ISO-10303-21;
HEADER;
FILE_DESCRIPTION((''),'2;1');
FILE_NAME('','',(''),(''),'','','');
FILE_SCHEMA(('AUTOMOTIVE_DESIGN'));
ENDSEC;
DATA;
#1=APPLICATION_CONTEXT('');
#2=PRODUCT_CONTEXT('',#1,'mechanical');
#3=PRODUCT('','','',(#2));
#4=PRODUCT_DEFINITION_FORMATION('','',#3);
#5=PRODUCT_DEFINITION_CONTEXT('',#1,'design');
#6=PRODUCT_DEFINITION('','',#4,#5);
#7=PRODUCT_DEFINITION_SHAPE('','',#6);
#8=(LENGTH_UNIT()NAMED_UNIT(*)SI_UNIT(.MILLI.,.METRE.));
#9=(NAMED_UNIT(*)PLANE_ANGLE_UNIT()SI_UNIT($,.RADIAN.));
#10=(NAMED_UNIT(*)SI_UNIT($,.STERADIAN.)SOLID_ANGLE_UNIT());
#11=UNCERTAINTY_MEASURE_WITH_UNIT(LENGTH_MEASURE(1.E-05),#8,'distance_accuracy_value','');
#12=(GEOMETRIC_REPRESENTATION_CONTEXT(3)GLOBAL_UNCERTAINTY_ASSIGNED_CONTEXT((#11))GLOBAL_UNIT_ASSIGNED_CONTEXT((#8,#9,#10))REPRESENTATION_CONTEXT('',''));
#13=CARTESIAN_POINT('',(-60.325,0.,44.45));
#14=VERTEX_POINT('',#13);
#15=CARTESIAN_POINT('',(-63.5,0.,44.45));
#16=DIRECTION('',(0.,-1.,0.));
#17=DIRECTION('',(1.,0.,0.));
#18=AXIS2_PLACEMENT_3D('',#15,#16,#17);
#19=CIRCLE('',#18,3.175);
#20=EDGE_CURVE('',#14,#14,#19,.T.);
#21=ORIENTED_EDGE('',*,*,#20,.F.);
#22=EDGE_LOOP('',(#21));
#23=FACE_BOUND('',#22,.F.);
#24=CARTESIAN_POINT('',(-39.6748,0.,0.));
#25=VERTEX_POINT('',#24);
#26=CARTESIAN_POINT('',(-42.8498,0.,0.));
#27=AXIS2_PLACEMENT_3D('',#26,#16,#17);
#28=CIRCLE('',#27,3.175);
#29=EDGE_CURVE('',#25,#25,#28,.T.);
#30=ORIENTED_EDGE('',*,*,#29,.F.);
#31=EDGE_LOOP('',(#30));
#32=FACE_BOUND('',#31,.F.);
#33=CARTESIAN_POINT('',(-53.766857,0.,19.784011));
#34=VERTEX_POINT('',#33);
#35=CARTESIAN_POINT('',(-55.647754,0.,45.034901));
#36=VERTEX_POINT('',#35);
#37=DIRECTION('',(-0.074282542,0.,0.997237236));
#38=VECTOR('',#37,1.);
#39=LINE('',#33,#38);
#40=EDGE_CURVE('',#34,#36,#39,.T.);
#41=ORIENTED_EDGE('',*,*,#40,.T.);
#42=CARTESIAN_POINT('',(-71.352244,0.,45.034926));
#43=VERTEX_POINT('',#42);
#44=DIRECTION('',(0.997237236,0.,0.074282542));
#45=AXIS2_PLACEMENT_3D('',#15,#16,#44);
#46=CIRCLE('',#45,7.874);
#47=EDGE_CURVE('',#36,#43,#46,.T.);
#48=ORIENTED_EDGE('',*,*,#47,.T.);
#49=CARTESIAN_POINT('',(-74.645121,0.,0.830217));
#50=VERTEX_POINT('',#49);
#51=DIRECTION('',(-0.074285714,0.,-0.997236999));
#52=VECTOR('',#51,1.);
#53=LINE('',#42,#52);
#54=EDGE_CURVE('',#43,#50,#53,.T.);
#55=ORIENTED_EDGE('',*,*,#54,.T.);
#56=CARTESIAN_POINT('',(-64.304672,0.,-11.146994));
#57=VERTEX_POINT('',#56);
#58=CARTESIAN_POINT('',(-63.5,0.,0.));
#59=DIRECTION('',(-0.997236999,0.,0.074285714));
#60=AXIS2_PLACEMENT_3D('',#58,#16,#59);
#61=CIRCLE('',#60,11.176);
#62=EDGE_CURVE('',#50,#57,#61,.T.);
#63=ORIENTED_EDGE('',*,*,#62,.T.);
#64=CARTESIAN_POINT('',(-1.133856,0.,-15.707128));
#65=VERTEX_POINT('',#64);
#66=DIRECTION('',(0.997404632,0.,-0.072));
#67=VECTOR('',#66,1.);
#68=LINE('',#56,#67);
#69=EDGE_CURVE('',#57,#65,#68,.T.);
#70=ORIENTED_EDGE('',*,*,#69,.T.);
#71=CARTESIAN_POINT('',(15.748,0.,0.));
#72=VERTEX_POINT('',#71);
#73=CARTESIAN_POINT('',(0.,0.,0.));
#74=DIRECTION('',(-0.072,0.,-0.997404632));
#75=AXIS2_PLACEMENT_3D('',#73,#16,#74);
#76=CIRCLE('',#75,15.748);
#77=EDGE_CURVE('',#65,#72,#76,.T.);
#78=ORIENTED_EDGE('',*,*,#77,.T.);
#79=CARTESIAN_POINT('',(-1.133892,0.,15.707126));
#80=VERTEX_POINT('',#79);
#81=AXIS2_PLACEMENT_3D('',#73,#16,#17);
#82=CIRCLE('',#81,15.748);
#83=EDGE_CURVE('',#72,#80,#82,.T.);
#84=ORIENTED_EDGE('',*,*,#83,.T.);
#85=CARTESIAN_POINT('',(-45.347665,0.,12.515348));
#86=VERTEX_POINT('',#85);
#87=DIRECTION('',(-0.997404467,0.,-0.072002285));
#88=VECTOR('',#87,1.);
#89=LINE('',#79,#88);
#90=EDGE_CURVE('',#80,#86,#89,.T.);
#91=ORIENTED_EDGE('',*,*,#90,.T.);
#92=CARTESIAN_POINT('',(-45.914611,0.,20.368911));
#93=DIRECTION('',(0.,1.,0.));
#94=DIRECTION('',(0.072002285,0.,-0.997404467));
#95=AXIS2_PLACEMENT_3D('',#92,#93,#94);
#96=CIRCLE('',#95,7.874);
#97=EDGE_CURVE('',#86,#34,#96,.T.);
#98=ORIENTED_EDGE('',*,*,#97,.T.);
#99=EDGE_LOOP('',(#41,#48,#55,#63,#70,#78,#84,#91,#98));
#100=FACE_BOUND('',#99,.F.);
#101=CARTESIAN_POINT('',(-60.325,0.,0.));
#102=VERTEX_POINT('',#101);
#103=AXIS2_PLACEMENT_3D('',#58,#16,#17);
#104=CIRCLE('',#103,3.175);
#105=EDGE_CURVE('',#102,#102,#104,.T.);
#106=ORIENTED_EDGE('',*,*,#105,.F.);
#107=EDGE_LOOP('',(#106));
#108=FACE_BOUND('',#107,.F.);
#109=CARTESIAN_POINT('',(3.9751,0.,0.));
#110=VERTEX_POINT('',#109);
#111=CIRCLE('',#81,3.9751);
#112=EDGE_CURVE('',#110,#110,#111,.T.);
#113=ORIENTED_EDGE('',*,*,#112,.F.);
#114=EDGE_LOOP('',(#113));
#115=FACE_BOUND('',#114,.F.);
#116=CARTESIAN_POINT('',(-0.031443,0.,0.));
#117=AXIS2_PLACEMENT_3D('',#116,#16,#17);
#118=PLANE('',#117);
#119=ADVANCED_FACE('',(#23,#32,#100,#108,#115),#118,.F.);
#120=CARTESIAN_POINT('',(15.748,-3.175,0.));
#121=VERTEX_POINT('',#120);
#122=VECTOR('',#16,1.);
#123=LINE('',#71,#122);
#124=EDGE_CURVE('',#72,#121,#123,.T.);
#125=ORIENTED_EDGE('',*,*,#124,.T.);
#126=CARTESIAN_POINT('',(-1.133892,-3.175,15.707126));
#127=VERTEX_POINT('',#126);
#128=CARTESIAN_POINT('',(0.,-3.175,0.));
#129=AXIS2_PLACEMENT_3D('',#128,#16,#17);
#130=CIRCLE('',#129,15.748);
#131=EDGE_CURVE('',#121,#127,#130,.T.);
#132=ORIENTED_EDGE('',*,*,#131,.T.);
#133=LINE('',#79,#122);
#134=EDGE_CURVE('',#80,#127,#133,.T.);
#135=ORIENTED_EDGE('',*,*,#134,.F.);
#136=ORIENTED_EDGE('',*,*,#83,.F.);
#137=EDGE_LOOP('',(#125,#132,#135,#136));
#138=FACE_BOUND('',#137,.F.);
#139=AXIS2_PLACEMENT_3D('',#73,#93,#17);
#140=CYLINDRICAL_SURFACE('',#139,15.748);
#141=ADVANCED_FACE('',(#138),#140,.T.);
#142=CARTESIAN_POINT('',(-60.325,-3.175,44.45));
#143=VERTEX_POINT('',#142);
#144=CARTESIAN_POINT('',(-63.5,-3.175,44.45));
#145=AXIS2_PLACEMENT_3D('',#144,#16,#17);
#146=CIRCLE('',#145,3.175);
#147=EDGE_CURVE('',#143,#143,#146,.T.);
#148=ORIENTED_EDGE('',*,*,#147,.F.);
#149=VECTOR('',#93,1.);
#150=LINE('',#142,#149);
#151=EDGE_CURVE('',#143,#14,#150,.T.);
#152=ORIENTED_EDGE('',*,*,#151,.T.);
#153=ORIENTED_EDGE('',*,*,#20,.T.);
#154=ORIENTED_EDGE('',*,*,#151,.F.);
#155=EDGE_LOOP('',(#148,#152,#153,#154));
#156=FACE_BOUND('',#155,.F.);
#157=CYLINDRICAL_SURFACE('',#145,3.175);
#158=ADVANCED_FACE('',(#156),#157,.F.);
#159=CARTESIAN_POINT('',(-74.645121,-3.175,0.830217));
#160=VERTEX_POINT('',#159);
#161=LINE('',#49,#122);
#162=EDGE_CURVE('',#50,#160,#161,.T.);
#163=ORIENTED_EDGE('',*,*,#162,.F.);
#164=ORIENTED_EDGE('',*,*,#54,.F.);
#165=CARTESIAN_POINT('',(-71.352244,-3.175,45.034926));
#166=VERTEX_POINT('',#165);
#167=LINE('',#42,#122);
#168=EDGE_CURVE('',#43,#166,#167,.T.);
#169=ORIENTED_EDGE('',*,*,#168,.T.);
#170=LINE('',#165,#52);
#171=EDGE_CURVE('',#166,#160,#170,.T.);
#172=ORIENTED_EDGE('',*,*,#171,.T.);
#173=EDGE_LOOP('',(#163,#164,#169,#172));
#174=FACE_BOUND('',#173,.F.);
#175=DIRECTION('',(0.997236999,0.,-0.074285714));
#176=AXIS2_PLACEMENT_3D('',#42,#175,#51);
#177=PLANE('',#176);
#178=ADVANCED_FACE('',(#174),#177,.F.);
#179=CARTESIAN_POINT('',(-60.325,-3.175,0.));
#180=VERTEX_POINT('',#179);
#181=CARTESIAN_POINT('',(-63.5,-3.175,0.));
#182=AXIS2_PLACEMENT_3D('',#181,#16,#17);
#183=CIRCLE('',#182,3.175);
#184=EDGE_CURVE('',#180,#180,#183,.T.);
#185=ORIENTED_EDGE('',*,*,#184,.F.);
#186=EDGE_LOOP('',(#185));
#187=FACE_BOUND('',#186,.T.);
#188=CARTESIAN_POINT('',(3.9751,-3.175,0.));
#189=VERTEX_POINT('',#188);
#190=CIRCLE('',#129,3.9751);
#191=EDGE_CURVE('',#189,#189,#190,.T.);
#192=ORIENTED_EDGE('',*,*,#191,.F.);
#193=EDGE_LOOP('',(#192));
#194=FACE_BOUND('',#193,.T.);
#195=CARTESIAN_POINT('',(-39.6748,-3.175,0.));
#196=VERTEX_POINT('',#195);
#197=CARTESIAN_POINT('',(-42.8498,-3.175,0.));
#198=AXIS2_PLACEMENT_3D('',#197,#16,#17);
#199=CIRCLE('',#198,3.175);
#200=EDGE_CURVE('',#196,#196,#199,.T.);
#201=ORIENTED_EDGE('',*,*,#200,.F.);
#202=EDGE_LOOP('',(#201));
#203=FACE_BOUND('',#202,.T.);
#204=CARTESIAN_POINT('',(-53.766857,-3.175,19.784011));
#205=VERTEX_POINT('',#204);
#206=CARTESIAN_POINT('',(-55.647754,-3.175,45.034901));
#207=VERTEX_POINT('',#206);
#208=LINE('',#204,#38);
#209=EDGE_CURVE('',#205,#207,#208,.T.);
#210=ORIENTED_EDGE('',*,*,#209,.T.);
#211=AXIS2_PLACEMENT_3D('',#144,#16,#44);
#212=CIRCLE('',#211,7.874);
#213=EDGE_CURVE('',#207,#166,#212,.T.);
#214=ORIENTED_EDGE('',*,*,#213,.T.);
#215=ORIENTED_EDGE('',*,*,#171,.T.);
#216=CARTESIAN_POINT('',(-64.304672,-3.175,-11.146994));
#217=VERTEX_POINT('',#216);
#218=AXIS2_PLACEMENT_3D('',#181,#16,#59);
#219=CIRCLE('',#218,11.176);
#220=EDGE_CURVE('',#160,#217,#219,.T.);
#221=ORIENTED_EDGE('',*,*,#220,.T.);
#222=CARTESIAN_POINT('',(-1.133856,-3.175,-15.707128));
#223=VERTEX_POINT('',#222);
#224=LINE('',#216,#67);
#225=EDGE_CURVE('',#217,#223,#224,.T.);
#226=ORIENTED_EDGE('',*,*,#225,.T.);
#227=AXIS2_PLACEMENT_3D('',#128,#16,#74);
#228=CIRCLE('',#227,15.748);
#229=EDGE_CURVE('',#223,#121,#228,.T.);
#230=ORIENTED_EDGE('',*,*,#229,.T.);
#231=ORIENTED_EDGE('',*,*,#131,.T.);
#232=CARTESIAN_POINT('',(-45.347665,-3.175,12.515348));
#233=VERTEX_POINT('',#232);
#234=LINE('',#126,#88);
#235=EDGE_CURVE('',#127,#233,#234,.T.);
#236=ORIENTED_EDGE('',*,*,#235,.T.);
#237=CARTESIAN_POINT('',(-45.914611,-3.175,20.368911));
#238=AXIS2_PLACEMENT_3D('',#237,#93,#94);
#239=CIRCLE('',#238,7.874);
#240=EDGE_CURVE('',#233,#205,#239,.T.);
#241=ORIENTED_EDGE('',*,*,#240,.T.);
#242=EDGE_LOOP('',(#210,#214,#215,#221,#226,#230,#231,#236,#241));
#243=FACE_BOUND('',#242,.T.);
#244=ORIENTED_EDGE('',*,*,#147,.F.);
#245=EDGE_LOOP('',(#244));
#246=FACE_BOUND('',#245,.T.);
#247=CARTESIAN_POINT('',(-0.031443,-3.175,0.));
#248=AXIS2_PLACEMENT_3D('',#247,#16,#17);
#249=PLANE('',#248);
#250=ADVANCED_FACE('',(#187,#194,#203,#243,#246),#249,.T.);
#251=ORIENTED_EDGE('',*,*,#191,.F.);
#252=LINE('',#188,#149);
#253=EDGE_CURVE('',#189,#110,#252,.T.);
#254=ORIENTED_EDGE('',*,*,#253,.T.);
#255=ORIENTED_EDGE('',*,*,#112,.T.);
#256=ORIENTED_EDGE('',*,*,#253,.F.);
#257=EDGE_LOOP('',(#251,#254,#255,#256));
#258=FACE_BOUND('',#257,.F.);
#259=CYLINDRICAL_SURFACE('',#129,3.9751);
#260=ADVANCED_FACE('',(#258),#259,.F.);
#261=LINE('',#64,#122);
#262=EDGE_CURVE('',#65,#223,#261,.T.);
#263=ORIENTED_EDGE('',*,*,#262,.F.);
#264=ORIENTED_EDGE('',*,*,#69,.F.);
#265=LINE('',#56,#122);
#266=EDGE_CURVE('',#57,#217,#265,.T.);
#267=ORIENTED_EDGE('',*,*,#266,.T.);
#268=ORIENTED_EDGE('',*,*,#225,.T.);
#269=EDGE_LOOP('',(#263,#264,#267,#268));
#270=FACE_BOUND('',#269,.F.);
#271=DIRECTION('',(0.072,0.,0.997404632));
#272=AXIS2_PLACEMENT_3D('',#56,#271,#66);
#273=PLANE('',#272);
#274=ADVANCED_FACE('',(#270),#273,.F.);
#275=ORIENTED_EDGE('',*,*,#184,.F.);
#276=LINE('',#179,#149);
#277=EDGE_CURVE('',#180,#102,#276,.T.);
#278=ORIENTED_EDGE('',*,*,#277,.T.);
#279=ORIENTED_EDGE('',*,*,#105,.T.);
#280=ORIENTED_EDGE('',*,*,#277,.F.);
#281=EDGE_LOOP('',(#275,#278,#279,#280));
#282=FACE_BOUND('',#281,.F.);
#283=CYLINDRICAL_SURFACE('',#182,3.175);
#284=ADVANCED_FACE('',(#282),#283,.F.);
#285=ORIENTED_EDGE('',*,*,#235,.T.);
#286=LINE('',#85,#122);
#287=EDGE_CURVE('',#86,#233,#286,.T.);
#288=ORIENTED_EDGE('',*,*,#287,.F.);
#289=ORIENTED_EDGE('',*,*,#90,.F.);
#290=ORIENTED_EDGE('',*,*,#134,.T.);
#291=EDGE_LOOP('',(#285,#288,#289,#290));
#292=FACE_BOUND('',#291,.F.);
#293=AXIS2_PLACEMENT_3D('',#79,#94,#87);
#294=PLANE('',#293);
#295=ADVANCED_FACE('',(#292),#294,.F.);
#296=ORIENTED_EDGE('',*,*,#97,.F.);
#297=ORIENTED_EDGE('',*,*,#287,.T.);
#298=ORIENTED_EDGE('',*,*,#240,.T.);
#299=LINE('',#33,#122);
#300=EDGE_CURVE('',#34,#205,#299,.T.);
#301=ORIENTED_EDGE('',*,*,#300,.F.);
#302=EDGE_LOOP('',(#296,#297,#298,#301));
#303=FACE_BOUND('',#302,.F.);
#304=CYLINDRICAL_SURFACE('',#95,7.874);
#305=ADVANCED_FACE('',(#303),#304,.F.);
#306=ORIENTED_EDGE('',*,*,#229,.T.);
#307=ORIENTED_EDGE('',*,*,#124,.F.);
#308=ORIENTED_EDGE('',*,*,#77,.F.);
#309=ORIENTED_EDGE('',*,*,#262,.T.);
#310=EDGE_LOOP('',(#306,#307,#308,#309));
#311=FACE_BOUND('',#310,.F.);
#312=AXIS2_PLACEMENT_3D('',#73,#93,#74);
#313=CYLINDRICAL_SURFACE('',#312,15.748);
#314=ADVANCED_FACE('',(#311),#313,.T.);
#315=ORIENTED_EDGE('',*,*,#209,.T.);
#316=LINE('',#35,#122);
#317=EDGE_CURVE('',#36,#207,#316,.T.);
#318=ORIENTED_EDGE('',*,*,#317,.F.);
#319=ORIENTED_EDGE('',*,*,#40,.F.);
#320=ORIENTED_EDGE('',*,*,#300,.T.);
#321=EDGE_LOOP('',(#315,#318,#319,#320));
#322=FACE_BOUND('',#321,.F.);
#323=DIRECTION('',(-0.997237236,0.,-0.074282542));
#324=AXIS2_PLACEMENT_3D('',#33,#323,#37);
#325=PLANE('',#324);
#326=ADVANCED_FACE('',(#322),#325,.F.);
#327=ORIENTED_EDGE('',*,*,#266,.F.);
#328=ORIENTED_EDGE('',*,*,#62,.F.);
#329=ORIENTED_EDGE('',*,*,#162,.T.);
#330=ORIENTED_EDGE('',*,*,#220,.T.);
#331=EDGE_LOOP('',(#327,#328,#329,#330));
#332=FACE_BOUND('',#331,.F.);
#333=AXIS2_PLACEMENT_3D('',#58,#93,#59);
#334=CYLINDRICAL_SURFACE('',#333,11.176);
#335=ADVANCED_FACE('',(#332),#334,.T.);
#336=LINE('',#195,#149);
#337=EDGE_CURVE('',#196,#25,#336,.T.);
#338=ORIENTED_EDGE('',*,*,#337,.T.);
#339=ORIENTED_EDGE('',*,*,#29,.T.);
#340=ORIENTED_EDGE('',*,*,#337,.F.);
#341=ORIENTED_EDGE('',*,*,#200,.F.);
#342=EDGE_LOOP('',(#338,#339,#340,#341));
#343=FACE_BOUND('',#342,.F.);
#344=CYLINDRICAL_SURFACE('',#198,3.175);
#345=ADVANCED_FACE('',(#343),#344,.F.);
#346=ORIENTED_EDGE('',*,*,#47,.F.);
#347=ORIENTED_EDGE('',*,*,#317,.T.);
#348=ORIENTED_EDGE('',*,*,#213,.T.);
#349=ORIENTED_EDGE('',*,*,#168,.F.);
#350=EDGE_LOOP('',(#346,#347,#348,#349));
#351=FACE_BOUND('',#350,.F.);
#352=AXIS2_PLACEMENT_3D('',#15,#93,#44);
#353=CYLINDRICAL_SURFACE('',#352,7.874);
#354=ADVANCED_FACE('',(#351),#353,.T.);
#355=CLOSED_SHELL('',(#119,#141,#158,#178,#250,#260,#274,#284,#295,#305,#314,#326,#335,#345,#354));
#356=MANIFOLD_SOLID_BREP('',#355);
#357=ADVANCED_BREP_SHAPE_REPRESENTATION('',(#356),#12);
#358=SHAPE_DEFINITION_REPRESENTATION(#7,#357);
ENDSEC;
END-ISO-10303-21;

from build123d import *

# Parameters (mm, degrees)
F1_DEPTH = 3.175
F2_R     = 3.9751
F2_R_2   = 3.175
F3_DEPTH = 3.176


with BuildPart() as f1:
    # F0 (on Front) → F1 (new body)
    with BuildSketch(Plane.XZ):
        with BuildLine():
            ThreePointArc((-1.133856, -15.7071281452), (10.7271510596, -11.5294290467), (15.748, 0))
            ThreePointArc((15.748, 0), (10.7271378512, 11.529441336), (-1.1338919889, 15.7071255473))
            ThreePointArc((-1.1338919889, 15.7071255473), (-11.529441336, 10.7271378512), (-15.748, 0))
            ThreePointArc((-15.748, 0), (-11.5294290467, -10.7271510596), (-1.133856, -15.7071281452))
        make_face()
        with BuildLine():
            ThreePointArc((-15.748, 0), (-11.529441336, 10.7271378512), (-1.1338919889, 15.7071255473))
            Line((-1.1338919889, 15.7071255473), (-45.34766523, 12.5153484696))
            ThreePointArc((-45.34766523, 12.5153484696), (-51.0602172111, 14.4088260903), (-53.7668572171, 19.7840105071))
            Line((-53.7668572171, 19.7840105071), (-55.6477540074, 45.0349007362))
            ThreePointArc((-55.6477540074, 45.0349007362), (-55.6314403813, 44.7426525705), (-55.626, 44.45))
            ThreePointArc((-55.626, 44.45), (-57.9322412049, 38.8822412049), (-63.5, 36.576))
            ThreePointArc((-63.5, 36.576), (-69.270857002, 39.0930339311), (-71.352244132, 45.0349257143))
            Line((-71.352244132, 45.0349257143), (-74.6451207035, 0.8302171429))
            ThreePointArc((-74.6451207035, 0.8302171429), (-63.0846043948, 11.1682775078), (-52.324, 0))
            ThreePointArc((-52.324, 0), (-55.887183119, -8.1821754525), (-64.304672, -11.1469941676))
            Line((-64.304672, -11.1469941676), (-1.133856, -15.7071281452))
            ThreePointArc((-1.133856, -15.7071281452), (-11.5294290467, -10.7271510596), (-15.748, 0))
        make_face()
        with BuildLine():
            ThreePointArc((-74.6451207035, 0.8302171429), (-71.9594789501, -7.3034369917), (-64.304672, -11.1469941676))
            ThreePointArc((-64.304672, -11.1469941676), (-55.887183119, -8.1821754525), (-52.324, 0))
            ThreePointArc((-52.324, 0), (-63.0846043948, 11.1682775078), (-74.6451207035, 0.8302171429))
        make_face()
        with BuildLine():
            ThreePointArc((-55.626, 44.45), (-55.6314403813, 44.7426525705), (-55.6477540074, 45.0349007362))
            ThreePointArc((-55.6477540074, 45.0349007362), (-63.4999874763, 52.324), (-71.352244132, 45.0349257143))
            ThreePointArc((-71.352244132, 45.0349257143), (-69.270857002, 39.0930339311), (-63.5, 36.576))
            ThreePointArc((-63.5, 36.576), (-57.9322412049, 38.8822412049), (-55.626, 44.45))
        make_face()
    extrude(amount=F1_DEPTH)

    # F2 (on face) → F3 (cut, through all)
    with BuildSketch(Plane.XZ.offset(3.175)):
        Circle(F2_R)
        with Locations((-63.5, 0)):
            Circle(F2_R_2)
        with Locations((-42.8498, 0)):
            Circle(F2_R_2)
        with Locations((-63.5, 44.45)):
            Circle(F2_R_2)
    extrude(amount=-F3_DEPTH, mode=Mode.SUBTRACT)


solid = f1.part
